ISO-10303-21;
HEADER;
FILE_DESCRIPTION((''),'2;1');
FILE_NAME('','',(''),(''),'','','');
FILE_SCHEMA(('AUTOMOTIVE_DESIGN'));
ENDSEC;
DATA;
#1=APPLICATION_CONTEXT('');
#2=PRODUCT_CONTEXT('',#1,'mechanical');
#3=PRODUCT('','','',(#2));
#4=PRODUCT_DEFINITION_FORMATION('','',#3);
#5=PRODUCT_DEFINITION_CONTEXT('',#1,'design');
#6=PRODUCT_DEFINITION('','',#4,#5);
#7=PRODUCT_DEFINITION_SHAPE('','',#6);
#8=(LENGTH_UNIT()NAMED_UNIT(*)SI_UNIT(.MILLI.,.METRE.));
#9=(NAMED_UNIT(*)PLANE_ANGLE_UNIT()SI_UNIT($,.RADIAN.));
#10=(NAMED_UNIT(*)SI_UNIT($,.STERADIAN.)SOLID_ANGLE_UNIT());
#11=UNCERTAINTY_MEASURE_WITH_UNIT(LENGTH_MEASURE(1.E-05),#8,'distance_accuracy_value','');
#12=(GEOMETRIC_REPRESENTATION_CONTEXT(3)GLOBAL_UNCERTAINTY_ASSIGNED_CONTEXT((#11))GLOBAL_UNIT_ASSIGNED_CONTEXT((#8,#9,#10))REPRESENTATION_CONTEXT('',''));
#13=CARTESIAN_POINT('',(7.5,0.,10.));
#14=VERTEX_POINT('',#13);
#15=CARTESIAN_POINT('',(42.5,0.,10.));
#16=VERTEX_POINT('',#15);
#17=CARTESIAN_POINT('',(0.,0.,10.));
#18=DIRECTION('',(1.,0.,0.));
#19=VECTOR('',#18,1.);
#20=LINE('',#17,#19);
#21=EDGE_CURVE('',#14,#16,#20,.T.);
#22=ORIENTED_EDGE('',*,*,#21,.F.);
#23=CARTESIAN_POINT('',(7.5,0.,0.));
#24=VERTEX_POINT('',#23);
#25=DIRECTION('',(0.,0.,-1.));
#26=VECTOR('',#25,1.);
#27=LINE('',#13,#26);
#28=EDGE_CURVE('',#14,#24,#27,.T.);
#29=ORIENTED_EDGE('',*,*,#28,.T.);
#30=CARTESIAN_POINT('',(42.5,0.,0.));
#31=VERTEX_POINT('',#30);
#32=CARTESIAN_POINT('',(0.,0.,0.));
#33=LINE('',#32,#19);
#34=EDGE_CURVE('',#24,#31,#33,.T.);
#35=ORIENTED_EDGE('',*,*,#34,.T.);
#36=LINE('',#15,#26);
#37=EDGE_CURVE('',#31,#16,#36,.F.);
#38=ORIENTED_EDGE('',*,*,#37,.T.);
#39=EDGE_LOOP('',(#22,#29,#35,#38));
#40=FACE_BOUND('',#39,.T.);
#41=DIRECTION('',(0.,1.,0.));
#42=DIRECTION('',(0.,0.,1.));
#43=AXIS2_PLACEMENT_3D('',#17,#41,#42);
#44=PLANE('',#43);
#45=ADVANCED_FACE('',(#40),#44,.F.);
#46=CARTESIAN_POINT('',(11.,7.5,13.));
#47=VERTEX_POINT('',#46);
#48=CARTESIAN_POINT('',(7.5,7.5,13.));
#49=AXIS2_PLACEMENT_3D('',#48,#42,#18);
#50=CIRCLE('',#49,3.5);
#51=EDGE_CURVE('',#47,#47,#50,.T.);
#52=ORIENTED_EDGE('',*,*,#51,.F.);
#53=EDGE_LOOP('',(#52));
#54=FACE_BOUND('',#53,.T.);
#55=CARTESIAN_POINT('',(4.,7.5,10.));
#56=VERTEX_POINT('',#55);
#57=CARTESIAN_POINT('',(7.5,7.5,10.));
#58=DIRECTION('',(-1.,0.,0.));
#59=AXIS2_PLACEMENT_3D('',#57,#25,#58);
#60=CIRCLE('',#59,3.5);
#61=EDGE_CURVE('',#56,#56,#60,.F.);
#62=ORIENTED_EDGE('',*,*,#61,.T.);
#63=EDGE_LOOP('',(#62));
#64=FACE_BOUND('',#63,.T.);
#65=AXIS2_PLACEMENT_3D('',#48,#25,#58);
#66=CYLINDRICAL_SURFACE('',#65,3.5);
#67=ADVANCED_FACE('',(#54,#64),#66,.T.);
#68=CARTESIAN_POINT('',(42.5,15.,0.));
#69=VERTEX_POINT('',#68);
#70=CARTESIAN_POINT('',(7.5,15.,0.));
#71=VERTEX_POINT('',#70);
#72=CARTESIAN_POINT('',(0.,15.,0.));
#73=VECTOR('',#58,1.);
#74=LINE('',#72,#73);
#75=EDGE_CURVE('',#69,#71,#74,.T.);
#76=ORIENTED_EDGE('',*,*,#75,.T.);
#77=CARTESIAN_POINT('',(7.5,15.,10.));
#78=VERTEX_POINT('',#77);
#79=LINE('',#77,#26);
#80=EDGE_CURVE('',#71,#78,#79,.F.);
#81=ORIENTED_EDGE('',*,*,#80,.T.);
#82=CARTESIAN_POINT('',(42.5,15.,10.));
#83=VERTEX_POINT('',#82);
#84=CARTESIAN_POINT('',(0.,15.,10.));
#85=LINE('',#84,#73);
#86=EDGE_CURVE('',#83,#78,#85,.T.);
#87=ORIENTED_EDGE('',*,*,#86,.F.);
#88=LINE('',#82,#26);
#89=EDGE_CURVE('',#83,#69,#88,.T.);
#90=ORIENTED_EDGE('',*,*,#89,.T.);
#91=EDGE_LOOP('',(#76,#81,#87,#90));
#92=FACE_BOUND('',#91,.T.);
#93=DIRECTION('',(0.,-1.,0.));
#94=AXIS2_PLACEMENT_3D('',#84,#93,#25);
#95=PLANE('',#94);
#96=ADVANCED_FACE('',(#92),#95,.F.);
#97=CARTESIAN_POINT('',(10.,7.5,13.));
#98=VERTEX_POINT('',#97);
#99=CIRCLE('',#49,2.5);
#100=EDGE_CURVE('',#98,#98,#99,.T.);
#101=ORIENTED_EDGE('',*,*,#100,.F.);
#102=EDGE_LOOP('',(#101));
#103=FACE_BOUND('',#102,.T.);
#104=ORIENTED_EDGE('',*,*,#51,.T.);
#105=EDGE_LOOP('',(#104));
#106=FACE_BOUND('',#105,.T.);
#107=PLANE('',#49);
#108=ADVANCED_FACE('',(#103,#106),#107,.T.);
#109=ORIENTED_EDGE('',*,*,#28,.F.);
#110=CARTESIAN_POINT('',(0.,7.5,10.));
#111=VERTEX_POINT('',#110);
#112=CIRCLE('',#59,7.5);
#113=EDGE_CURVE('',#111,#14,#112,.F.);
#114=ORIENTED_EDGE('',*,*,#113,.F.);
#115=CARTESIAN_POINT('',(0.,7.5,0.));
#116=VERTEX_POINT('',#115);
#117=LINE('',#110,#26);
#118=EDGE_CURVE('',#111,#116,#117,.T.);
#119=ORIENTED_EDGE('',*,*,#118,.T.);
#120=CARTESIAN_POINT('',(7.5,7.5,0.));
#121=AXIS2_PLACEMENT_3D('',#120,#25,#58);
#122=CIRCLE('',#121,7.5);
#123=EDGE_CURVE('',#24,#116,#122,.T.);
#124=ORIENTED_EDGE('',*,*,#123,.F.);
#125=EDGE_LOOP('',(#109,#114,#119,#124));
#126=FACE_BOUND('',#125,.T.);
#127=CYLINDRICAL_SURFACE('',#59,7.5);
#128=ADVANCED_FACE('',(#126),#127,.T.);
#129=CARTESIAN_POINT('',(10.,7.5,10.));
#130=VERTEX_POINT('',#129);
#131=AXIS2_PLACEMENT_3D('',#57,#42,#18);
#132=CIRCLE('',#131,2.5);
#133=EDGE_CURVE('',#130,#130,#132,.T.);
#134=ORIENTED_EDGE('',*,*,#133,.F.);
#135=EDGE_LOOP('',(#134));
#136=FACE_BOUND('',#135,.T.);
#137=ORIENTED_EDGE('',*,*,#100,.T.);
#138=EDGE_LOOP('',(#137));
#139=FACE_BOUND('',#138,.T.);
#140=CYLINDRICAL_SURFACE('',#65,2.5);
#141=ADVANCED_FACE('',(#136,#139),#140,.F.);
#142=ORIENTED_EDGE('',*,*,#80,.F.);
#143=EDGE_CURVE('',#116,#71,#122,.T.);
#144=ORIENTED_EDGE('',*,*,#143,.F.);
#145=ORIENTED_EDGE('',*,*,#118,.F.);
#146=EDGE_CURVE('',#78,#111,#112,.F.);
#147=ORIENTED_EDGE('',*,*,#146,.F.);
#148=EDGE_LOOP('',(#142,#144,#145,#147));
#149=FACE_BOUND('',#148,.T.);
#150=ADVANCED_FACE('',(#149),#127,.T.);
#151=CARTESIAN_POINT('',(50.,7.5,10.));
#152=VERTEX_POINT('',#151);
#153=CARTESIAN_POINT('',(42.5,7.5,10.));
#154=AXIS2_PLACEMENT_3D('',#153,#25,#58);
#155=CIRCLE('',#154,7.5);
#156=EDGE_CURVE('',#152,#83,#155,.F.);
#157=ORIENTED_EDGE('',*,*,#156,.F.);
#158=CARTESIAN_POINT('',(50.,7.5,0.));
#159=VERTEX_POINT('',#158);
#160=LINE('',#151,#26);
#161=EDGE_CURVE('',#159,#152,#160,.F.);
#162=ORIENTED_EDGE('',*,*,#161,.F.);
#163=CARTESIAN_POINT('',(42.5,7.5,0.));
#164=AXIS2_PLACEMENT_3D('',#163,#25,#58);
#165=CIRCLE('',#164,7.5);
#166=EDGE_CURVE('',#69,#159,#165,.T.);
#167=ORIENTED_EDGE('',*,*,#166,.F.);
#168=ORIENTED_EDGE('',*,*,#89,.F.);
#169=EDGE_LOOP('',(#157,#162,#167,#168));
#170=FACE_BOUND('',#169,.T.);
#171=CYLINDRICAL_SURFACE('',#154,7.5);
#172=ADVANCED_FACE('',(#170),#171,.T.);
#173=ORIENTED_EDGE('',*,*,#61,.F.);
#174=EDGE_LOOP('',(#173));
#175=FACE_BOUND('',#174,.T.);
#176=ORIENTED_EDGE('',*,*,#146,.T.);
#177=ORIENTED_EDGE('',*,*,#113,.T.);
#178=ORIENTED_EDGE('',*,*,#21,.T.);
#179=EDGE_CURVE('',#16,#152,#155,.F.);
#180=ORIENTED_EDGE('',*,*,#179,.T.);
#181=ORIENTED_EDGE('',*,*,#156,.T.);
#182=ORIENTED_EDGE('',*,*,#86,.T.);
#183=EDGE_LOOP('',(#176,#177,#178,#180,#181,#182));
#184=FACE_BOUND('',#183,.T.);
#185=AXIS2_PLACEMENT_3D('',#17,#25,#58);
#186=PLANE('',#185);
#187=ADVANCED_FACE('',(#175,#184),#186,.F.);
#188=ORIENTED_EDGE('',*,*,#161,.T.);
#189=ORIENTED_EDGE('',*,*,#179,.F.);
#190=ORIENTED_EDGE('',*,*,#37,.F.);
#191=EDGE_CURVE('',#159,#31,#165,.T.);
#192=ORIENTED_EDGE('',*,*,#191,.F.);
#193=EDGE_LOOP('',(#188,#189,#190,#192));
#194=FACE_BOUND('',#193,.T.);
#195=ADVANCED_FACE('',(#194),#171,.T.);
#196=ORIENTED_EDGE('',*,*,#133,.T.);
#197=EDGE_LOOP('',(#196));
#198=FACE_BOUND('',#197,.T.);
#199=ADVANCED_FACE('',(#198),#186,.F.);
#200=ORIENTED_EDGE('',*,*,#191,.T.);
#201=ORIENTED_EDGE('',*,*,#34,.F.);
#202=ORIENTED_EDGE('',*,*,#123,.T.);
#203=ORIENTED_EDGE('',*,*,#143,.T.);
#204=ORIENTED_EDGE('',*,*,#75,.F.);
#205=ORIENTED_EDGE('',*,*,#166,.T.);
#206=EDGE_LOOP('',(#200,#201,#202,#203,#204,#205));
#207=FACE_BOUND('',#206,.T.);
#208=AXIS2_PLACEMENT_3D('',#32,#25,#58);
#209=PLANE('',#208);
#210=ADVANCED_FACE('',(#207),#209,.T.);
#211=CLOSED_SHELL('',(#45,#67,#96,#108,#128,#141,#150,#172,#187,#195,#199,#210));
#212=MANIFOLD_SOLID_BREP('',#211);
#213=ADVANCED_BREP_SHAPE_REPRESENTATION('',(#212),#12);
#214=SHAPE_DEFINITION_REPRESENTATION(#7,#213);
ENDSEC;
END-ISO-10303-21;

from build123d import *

# Parameters (mm, degrees)
SKETCH1_W           = 50
SKETCH1_H           = 15
BOSS_EXTRUDE1_DEPTH = 10
FILLET1_R           = 7.5
SKETCH2_R           = 3.5
SKETCH2_R_2         = 2.5
BOSS_EXTRUDE2_DEPTH = 3


with BuildPart() as part:
    # Sketch1 → Boss-Extrude1 (new body)
    with BuildSketch(Plane.XY):
        with Locations((25, 7.5)):
            Rectangle(SKETCH1_W, SKETCH1_H)
    extrude(amount=BOSS_EXTRUDE1_DEPTH)

    # Fillet1
    fillet1_edges = [part.edges().sort_by_distance(p)[0] for p in [
        (50, 0, 5),
        (50, 15, 5),
        (0, 0, 5),
        (0, 15, 5),
    ]]
    fillet(fillet1_edges, radius=FILLET1_R - 0.0001)  # a hair under: the kernel refuses the full size

    # Sketch2 → Boss-Extrude2 (add)
    with BuildSketch(Plane.XY.offset(10)):
        with Locations(Location((7.5, 7.5, 0), (0, 0, 180))):
            Circle(SKETCH2_R)
        with Locations((7.5, 7.5)):
            Circle(SKETCH2_R_2, mode=Mode.SUBTRACT)
    extrude(amount=BOSS_EXTRUDE2_DEPTH)


solid = part.part
